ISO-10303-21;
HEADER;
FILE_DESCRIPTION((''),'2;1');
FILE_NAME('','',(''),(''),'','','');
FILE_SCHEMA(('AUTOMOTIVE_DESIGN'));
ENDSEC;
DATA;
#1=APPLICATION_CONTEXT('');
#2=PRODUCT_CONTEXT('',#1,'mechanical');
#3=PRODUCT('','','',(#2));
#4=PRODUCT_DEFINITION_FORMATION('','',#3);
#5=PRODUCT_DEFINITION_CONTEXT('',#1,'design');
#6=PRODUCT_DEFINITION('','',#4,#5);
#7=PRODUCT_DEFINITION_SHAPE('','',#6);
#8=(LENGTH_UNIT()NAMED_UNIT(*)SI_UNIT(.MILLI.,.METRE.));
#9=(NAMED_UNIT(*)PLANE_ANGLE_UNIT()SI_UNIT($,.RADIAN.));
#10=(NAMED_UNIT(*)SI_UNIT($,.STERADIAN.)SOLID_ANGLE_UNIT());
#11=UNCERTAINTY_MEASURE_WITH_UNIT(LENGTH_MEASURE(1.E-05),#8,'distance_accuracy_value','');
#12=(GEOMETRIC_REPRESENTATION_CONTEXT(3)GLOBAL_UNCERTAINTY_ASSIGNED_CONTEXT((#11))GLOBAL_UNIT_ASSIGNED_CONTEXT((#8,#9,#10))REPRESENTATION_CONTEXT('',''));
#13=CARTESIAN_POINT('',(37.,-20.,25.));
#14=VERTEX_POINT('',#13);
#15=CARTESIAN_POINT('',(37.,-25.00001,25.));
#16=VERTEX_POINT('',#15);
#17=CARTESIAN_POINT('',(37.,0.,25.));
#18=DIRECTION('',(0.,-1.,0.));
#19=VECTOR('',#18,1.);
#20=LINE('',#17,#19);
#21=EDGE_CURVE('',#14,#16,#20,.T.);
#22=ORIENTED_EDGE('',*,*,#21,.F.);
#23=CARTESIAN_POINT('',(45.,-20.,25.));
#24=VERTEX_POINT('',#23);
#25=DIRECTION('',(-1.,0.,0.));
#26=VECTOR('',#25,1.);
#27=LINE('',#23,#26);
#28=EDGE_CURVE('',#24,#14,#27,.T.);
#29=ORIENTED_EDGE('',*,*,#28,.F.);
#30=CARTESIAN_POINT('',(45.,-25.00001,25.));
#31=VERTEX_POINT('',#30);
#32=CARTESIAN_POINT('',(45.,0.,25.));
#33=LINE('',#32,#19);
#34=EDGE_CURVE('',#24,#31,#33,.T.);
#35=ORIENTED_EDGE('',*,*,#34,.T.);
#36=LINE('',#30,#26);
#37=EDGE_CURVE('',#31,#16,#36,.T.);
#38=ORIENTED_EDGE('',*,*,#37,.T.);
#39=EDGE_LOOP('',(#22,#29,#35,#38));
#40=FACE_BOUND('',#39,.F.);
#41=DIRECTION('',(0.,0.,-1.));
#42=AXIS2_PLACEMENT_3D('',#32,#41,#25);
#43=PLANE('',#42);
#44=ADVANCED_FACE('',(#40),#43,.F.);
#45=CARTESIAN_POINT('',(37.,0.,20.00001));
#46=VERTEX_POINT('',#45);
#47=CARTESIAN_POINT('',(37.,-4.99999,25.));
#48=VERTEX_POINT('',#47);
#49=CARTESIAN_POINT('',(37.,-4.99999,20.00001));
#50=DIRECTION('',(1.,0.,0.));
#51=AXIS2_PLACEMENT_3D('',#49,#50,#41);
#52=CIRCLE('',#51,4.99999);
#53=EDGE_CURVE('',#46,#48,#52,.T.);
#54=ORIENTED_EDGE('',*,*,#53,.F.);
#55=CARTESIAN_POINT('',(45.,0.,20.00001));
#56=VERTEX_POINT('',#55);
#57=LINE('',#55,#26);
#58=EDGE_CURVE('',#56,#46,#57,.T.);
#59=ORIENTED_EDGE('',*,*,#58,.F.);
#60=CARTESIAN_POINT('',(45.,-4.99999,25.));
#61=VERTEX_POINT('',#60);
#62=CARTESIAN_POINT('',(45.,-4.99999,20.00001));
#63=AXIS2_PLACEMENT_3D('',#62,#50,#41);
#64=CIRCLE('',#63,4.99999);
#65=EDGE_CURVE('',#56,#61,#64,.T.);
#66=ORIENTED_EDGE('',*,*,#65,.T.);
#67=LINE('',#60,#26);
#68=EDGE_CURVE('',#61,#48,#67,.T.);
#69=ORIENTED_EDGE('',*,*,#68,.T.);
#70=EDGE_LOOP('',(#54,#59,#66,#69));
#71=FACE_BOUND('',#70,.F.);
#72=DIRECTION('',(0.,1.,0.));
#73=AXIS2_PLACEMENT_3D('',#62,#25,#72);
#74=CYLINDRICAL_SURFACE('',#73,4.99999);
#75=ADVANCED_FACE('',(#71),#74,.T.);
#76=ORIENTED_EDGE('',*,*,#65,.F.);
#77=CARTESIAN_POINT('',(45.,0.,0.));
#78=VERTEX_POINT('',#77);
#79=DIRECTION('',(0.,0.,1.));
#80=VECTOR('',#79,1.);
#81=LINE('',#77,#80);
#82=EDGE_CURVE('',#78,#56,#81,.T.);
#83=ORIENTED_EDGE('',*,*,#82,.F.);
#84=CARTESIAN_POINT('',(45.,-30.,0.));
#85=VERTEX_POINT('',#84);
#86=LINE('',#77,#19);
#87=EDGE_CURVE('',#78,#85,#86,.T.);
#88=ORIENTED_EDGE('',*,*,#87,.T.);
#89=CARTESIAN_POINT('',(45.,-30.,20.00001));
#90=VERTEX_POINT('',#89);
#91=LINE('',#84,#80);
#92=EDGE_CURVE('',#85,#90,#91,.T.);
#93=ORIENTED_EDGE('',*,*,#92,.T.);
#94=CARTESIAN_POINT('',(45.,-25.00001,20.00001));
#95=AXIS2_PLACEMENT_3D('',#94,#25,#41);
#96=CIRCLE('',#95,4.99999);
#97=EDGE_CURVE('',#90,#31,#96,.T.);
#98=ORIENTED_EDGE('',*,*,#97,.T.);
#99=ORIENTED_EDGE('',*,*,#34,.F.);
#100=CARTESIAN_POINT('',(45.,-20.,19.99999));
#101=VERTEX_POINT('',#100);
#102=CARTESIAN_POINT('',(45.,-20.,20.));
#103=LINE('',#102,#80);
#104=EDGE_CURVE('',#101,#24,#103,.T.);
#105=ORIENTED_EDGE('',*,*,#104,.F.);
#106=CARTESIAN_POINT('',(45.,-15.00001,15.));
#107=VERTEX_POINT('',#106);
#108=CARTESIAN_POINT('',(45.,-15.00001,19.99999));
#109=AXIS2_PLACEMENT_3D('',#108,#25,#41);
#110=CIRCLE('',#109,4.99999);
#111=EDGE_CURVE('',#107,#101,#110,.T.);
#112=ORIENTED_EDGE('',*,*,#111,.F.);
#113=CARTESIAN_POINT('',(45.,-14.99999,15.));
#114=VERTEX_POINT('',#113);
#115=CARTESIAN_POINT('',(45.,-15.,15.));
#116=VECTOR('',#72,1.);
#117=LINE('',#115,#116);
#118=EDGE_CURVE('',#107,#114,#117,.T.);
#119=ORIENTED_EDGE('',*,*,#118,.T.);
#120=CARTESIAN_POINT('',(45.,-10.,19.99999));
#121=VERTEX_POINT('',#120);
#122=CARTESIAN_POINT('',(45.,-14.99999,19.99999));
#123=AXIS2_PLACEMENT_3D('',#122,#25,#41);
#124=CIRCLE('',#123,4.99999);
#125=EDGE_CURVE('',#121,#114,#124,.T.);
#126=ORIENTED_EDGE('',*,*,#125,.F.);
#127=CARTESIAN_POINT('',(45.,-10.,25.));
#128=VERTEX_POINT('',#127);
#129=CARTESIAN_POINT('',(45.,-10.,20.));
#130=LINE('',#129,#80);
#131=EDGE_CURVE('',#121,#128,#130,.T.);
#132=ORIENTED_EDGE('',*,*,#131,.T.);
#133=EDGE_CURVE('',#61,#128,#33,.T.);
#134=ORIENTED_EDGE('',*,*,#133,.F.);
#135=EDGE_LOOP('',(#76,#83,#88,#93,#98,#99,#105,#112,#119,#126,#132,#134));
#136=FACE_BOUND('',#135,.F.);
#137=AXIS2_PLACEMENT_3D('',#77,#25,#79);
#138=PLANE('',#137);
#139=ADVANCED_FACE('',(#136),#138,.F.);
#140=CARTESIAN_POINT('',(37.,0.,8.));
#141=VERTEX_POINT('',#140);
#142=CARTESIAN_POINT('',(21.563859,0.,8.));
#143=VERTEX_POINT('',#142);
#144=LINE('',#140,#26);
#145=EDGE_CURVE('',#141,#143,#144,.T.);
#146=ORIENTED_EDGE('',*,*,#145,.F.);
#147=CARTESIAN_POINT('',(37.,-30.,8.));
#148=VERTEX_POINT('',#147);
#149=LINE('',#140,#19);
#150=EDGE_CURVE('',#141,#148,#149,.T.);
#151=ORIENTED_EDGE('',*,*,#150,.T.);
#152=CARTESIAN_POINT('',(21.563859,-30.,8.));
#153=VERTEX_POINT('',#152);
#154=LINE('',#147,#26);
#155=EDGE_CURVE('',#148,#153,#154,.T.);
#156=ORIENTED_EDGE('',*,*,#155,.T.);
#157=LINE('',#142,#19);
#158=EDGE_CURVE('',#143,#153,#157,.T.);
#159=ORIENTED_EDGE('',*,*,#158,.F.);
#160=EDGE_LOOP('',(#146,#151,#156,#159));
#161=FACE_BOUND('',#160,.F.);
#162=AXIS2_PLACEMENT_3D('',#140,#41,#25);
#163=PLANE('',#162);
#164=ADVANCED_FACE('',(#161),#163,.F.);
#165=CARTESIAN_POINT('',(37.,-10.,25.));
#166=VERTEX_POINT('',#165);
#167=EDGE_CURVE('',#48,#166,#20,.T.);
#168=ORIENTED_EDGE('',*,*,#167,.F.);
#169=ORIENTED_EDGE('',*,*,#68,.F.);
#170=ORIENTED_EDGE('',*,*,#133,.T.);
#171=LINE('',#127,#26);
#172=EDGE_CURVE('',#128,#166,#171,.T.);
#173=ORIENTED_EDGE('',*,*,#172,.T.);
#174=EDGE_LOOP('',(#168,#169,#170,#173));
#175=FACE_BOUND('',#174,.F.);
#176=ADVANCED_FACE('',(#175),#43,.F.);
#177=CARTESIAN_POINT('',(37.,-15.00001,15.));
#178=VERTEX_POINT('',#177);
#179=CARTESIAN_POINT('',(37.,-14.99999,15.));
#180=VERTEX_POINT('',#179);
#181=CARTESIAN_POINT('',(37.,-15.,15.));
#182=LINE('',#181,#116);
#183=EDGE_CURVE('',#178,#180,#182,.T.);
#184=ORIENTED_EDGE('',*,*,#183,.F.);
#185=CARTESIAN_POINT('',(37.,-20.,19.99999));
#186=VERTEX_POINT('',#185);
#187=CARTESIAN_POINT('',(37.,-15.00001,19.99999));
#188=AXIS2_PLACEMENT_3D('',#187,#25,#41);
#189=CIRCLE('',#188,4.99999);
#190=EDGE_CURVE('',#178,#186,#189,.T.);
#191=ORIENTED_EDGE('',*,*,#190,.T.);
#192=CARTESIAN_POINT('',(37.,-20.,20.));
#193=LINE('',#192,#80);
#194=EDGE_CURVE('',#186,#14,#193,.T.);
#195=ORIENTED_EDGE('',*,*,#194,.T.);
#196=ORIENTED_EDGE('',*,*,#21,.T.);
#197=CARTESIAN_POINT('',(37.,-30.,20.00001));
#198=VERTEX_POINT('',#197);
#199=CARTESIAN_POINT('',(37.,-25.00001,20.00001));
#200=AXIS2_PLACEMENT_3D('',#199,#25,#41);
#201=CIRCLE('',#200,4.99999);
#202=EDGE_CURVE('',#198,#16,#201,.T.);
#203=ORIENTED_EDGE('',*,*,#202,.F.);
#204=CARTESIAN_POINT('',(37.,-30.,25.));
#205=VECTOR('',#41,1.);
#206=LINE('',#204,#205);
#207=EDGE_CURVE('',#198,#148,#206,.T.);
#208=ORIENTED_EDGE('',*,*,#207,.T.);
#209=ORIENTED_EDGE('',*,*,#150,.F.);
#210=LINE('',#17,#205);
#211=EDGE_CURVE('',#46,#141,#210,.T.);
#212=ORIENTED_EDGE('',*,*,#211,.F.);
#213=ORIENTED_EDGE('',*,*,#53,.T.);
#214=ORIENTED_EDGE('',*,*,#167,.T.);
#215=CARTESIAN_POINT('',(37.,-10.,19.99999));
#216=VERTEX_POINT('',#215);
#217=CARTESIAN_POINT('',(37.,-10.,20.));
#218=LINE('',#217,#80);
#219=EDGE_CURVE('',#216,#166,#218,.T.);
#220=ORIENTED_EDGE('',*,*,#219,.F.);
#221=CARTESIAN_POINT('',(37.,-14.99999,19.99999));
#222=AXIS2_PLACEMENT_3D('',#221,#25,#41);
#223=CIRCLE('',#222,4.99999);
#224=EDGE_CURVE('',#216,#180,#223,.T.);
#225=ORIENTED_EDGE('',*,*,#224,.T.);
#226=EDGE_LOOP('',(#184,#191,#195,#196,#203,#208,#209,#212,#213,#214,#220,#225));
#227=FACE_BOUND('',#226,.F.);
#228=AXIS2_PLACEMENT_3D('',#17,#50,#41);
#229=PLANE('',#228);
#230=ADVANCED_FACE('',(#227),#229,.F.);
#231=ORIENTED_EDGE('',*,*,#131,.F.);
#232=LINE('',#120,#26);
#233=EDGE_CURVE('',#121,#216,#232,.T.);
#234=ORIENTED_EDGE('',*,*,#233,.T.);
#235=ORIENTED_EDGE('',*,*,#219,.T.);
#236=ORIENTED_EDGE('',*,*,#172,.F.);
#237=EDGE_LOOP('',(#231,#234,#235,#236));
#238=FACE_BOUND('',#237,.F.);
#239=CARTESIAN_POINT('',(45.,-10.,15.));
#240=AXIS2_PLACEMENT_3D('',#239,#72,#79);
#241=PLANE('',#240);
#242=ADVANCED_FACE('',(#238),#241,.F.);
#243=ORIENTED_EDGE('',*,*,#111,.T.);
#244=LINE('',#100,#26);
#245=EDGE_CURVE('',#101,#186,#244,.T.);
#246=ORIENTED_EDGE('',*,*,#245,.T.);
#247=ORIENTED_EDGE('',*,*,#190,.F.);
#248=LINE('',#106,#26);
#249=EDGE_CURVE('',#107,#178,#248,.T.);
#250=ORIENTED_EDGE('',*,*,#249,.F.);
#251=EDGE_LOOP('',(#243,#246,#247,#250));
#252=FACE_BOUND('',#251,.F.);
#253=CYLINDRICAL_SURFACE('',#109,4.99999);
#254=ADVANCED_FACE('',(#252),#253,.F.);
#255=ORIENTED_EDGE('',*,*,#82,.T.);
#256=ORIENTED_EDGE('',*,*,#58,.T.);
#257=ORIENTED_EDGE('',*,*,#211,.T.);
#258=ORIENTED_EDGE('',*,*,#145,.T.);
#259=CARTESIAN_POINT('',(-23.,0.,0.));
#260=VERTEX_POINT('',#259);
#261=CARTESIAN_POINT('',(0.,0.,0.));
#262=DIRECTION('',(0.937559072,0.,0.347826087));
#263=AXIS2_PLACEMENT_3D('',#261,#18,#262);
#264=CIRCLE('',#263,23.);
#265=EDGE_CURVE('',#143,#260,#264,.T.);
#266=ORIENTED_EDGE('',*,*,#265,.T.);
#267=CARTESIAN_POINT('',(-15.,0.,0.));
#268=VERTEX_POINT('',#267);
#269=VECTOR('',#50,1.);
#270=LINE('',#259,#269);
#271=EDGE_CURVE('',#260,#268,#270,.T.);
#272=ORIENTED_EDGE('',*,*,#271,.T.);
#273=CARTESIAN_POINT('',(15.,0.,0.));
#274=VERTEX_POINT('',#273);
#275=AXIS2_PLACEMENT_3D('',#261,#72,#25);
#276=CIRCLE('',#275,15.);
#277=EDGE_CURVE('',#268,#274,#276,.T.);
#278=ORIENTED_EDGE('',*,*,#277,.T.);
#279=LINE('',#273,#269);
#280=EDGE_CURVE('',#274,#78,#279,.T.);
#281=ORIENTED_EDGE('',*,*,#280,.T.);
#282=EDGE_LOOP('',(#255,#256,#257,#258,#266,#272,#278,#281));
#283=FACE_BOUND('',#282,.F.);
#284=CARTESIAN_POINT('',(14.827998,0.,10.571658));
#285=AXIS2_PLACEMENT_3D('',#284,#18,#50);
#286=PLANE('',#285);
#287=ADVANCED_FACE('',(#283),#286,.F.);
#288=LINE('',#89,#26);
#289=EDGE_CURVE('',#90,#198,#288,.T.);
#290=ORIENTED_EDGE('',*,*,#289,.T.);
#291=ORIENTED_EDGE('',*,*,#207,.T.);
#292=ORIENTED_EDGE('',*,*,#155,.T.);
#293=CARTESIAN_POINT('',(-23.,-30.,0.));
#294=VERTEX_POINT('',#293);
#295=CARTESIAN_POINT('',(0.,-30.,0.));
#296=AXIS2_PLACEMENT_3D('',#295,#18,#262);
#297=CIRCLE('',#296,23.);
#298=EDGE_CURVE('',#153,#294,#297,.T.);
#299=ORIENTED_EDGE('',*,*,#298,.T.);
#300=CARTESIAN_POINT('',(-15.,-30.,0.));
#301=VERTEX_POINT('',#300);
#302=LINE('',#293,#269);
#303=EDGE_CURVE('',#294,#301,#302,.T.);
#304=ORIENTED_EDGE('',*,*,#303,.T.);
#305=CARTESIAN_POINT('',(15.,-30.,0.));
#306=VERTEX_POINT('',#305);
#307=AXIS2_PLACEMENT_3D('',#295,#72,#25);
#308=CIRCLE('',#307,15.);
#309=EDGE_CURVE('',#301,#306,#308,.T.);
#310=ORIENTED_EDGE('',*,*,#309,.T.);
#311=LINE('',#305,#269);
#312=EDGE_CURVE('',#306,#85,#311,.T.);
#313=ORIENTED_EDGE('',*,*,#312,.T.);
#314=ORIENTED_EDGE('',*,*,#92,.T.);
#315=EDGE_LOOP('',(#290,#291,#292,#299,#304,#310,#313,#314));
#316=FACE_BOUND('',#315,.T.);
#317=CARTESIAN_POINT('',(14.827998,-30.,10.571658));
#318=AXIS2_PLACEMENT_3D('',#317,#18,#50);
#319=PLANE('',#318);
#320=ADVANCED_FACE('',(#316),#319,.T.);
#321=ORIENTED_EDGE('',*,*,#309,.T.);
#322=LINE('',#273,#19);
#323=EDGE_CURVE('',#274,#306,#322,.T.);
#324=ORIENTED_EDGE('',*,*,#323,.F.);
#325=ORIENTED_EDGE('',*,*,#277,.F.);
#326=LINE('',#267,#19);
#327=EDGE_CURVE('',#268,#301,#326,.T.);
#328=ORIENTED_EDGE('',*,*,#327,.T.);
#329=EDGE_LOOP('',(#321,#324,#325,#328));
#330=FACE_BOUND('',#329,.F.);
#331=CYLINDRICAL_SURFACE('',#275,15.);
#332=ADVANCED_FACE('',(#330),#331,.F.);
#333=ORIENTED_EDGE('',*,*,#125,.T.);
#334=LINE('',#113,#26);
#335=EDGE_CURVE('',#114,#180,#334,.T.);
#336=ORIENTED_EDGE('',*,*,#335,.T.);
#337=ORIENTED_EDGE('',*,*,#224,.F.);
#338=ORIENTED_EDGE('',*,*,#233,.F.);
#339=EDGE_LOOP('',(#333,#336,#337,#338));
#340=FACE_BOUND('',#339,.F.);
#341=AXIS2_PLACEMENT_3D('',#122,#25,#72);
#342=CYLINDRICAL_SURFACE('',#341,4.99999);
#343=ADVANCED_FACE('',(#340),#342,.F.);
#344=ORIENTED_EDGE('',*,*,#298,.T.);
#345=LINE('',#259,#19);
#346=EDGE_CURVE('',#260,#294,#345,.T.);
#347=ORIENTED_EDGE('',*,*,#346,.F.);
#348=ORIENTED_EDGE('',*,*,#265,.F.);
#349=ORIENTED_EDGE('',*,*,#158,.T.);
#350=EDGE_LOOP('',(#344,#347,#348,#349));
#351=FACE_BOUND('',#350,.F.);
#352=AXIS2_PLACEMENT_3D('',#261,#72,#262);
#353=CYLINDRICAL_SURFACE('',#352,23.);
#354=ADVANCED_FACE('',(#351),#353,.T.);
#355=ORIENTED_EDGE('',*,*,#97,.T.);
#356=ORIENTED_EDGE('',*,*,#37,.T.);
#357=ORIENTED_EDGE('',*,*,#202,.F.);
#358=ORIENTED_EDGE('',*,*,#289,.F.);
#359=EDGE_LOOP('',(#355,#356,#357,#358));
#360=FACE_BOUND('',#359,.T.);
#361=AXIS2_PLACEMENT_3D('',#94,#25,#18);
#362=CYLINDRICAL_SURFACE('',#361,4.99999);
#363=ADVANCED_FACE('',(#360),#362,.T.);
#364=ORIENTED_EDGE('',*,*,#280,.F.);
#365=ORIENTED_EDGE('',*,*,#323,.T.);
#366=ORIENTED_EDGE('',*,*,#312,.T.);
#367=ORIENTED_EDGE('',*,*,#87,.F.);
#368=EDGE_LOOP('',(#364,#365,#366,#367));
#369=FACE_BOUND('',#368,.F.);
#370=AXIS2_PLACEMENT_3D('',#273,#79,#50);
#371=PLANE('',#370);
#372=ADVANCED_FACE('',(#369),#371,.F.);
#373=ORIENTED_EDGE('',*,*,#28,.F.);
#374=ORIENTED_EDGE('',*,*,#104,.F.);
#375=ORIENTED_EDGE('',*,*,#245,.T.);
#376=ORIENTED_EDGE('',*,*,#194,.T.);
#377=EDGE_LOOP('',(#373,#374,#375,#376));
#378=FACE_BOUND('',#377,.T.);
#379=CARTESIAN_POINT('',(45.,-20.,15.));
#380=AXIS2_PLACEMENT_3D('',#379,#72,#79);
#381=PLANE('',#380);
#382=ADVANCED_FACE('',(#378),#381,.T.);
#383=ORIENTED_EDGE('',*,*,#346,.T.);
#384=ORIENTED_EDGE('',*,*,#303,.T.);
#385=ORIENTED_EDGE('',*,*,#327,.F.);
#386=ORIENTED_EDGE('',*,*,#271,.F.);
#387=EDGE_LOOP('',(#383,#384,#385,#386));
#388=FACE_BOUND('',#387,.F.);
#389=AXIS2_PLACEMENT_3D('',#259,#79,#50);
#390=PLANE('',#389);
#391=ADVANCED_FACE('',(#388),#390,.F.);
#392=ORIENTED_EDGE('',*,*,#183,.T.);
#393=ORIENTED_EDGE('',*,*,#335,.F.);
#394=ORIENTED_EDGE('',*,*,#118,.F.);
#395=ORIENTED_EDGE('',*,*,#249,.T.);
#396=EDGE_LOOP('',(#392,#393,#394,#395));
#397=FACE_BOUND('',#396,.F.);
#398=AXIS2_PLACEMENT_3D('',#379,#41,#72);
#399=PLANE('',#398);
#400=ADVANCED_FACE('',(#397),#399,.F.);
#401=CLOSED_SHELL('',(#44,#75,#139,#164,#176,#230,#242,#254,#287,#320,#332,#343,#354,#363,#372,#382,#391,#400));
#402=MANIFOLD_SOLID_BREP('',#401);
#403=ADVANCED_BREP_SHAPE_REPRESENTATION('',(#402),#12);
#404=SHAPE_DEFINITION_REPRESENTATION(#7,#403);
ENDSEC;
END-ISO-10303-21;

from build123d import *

# Parameters (mm, degrees)
F1_DEPTH = 30
F2_W     = 10
F2_H     = 10
F3_DEPTH = 8
F4_R     = 4.99999


# Not quite as in the source:
# - a fillet or chamfer is up to 0.001 mm smaller than in the source, because OpenCascade refuses the exact size


with BuildPart() as f1:
    # F0 (on Front) → F1 (new body)
    with BuildSketch(Plane.XZ):
        with BuildLine():
            ThreePointArc((-15, 0), (0, 15), (15, 0))
            Line((15, 0), (45, 0))
            Line((45, 0), (45, 25))
            Line((45, 25), (37, 25))
            Line((37, 25), (37, 8))
            Line((37, 8), (21.5638586528, 8))
            ThreePointArc((21.5638586528, 8), (-4.0639421123, 22.6381177333), (-23, 0))
            Line((-23, 0), (-15, 0))
        make_face()
    extrude(amount=F1_DEPTH)

    # F2 (on face) → F3 (cut, through all)
    with BuildSketch(Plane.YZ.offset(45)):
        with Locations((-15, 20)):
            Rectangle(F2_W, F2_H)
    extrude(amount=-F3_DEPTH, mode=Mode.SUBTRACT)

    # F4 (radius 5 in the source; OpenCascade refuses exactly that, so slightly less here)
    f4_edges = [f1.edges().sort_by_distance(p)[0] for p in [
        (41, -30, 25),
        (41, 0, 25),
        (41, -10, 15),
        (41, -20, 15),
    ]]
    fillet(f4_edges, radius=F4_R)


solid = f1.part
